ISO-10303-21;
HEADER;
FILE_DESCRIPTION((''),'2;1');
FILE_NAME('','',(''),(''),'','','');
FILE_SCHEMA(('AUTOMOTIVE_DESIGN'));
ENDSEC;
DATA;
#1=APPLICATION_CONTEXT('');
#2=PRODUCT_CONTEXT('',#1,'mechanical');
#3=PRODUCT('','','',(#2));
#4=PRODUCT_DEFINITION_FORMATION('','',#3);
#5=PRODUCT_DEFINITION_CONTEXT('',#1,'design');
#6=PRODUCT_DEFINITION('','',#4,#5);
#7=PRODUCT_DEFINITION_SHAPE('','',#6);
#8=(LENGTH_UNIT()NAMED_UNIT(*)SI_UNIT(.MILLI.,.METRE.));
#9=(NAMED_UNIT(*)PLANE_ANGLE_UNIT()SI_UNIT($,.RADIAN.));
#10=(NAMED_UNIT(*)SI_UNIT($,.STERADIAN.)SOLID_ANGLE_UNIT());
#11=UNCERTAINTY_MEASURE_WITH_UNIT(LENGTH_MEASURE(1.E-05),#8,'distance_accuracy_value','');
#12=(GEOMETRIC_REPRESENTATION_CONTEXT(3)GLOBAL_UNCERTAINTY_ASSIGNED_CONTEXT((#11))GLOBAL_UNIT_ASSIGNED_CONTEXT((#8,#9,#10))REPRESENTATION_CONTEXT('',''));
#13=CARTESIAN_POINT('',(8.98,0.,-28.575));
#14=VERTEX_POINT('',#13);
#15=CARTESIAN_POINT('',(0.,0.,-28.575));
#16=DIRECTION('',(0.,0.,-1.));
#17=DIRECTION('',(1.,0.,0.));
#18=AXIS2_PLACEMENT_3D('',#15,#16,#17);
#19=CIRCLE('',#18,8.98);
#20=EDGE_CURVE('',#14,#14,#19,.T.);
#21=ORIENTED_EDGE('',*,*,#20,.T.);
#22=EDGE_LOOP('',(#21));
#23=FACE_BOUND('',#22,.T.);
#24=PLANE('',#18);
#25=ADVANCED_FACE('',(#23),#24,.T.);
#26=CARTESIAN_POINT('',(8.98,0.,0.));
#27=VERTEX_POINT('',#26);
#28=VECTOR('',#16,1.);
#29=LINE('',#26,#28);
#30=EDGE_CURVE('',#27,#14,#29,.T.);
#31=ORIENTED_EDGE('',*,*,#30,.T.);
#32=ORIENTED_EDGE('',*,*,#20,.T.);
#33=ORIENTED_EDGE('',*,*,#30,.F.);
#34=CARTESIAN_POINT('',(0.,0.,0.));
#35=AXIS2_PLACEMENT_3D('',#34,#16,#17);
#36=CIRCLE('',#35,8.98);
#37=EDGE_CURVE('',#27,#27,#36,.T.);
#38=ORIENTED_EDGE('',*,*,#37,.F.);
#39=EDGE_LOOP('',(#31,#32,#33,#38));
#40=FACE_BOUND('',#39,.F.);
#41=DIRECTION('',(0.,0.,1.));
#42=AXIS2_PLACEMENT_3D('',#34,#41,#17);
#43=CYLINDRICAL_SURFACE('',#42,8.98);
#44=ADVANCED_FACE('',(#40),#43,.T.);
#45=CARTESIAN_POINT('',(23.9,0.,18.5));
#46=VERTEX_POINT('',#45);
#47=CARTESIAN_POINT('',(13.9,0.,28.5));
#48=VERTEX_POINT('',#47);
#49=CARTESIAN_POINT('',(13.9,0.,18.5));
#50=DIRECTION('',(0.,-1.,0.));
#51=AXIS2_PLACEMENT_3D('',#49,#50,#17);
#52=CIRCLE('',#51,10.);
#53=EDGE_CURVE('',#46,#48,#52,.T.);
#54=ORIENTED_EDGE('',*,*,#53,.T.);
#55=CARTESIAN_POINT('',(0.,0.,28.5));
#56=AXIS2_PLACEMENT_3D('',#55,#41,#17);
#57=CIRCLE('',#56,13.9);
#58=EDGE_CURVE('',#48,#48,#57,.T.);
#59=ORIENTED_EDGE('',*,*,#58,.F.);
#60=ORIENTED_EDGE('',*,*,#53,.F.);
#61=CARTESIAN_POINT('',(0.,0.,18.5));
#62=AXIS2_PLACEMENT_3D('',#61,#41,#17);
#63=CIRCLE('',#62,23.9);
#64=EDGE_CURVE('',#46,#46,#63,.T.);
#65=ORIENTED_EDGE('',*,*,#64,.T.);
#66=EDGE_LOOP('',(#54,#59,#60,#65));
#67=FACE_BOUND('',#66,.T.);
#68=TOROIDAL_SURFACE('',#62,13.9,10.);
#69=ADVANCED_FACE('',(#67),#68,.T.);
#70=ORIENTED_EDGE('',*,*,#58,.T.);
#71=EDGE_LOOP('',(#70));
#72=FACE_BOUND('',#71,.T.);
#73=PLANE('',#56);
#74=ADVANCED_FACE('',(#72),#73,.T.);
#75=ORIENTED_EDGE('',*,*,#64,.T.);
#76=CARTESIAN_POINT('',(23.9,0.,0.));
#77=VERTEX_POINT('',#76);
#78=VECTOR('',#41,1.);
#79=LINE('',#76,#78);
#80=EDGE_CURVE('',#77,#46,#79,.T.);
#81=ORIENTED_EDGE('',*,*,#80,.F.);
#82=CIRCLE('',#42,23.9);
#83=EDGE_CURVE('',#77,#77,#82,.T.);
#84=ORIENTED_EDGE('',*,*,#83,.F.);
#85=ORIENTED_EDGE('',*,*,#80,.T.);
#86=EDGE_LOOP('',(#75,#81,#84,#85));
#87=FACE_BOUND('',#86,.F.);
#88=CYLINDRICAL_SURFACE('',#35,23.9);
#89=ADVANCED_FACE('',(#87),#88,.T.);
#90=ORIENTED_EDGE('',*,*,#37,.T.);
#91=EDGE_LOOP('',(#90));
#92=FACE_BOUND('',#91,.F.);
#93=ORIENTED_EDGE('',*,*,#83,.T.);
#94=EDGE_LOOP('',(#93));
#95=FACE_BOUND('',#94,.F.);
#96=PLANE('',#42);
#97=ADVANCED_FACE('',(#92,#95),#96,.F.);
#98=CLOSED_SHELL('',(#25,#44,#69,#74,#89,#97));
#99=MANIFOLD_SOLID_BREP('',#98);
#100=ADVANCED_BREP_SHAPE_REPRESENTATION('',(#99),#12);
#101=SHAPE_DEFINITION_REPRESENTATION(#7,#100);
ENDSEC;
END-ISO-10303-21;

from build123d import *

# Parameters (mm, degrees)
F0_R     = 23.9
F1_DEPTH = 28.5
F2_R     = 8.98
F3_DEPTH = 28.575
F4_R     = 10


# Not quite as in the source:
# - a length typed as a fraction of an inch, garbled in the dataset ("3 / 203.2 mm" for 3/8 in), is restored


with BuildPart() as f1:
    # F0 (on Top) → F1 (new body)
    with BuildSketch(Plane.XY):
        Circle(F0_R)
    extrude(amount=F1_DEPTH)

    # F2 (on face) → F3 (join)
    with BuildSketch(Plane(origin=(0, 0, 0), x_dir=(1, 0, 0), z_dir=(0, 0, -1))):
        Circle(F2_R)
    extrude(amount=F3_DEPTH)

    # F4
    f4_edges = [f1.edges().sort_by_distance(p)[0] for p in [
        (-23.9, 0, 28.5),
    ]]
    fillet(f4_edges, radius=F4_R)


solid = f1.part
